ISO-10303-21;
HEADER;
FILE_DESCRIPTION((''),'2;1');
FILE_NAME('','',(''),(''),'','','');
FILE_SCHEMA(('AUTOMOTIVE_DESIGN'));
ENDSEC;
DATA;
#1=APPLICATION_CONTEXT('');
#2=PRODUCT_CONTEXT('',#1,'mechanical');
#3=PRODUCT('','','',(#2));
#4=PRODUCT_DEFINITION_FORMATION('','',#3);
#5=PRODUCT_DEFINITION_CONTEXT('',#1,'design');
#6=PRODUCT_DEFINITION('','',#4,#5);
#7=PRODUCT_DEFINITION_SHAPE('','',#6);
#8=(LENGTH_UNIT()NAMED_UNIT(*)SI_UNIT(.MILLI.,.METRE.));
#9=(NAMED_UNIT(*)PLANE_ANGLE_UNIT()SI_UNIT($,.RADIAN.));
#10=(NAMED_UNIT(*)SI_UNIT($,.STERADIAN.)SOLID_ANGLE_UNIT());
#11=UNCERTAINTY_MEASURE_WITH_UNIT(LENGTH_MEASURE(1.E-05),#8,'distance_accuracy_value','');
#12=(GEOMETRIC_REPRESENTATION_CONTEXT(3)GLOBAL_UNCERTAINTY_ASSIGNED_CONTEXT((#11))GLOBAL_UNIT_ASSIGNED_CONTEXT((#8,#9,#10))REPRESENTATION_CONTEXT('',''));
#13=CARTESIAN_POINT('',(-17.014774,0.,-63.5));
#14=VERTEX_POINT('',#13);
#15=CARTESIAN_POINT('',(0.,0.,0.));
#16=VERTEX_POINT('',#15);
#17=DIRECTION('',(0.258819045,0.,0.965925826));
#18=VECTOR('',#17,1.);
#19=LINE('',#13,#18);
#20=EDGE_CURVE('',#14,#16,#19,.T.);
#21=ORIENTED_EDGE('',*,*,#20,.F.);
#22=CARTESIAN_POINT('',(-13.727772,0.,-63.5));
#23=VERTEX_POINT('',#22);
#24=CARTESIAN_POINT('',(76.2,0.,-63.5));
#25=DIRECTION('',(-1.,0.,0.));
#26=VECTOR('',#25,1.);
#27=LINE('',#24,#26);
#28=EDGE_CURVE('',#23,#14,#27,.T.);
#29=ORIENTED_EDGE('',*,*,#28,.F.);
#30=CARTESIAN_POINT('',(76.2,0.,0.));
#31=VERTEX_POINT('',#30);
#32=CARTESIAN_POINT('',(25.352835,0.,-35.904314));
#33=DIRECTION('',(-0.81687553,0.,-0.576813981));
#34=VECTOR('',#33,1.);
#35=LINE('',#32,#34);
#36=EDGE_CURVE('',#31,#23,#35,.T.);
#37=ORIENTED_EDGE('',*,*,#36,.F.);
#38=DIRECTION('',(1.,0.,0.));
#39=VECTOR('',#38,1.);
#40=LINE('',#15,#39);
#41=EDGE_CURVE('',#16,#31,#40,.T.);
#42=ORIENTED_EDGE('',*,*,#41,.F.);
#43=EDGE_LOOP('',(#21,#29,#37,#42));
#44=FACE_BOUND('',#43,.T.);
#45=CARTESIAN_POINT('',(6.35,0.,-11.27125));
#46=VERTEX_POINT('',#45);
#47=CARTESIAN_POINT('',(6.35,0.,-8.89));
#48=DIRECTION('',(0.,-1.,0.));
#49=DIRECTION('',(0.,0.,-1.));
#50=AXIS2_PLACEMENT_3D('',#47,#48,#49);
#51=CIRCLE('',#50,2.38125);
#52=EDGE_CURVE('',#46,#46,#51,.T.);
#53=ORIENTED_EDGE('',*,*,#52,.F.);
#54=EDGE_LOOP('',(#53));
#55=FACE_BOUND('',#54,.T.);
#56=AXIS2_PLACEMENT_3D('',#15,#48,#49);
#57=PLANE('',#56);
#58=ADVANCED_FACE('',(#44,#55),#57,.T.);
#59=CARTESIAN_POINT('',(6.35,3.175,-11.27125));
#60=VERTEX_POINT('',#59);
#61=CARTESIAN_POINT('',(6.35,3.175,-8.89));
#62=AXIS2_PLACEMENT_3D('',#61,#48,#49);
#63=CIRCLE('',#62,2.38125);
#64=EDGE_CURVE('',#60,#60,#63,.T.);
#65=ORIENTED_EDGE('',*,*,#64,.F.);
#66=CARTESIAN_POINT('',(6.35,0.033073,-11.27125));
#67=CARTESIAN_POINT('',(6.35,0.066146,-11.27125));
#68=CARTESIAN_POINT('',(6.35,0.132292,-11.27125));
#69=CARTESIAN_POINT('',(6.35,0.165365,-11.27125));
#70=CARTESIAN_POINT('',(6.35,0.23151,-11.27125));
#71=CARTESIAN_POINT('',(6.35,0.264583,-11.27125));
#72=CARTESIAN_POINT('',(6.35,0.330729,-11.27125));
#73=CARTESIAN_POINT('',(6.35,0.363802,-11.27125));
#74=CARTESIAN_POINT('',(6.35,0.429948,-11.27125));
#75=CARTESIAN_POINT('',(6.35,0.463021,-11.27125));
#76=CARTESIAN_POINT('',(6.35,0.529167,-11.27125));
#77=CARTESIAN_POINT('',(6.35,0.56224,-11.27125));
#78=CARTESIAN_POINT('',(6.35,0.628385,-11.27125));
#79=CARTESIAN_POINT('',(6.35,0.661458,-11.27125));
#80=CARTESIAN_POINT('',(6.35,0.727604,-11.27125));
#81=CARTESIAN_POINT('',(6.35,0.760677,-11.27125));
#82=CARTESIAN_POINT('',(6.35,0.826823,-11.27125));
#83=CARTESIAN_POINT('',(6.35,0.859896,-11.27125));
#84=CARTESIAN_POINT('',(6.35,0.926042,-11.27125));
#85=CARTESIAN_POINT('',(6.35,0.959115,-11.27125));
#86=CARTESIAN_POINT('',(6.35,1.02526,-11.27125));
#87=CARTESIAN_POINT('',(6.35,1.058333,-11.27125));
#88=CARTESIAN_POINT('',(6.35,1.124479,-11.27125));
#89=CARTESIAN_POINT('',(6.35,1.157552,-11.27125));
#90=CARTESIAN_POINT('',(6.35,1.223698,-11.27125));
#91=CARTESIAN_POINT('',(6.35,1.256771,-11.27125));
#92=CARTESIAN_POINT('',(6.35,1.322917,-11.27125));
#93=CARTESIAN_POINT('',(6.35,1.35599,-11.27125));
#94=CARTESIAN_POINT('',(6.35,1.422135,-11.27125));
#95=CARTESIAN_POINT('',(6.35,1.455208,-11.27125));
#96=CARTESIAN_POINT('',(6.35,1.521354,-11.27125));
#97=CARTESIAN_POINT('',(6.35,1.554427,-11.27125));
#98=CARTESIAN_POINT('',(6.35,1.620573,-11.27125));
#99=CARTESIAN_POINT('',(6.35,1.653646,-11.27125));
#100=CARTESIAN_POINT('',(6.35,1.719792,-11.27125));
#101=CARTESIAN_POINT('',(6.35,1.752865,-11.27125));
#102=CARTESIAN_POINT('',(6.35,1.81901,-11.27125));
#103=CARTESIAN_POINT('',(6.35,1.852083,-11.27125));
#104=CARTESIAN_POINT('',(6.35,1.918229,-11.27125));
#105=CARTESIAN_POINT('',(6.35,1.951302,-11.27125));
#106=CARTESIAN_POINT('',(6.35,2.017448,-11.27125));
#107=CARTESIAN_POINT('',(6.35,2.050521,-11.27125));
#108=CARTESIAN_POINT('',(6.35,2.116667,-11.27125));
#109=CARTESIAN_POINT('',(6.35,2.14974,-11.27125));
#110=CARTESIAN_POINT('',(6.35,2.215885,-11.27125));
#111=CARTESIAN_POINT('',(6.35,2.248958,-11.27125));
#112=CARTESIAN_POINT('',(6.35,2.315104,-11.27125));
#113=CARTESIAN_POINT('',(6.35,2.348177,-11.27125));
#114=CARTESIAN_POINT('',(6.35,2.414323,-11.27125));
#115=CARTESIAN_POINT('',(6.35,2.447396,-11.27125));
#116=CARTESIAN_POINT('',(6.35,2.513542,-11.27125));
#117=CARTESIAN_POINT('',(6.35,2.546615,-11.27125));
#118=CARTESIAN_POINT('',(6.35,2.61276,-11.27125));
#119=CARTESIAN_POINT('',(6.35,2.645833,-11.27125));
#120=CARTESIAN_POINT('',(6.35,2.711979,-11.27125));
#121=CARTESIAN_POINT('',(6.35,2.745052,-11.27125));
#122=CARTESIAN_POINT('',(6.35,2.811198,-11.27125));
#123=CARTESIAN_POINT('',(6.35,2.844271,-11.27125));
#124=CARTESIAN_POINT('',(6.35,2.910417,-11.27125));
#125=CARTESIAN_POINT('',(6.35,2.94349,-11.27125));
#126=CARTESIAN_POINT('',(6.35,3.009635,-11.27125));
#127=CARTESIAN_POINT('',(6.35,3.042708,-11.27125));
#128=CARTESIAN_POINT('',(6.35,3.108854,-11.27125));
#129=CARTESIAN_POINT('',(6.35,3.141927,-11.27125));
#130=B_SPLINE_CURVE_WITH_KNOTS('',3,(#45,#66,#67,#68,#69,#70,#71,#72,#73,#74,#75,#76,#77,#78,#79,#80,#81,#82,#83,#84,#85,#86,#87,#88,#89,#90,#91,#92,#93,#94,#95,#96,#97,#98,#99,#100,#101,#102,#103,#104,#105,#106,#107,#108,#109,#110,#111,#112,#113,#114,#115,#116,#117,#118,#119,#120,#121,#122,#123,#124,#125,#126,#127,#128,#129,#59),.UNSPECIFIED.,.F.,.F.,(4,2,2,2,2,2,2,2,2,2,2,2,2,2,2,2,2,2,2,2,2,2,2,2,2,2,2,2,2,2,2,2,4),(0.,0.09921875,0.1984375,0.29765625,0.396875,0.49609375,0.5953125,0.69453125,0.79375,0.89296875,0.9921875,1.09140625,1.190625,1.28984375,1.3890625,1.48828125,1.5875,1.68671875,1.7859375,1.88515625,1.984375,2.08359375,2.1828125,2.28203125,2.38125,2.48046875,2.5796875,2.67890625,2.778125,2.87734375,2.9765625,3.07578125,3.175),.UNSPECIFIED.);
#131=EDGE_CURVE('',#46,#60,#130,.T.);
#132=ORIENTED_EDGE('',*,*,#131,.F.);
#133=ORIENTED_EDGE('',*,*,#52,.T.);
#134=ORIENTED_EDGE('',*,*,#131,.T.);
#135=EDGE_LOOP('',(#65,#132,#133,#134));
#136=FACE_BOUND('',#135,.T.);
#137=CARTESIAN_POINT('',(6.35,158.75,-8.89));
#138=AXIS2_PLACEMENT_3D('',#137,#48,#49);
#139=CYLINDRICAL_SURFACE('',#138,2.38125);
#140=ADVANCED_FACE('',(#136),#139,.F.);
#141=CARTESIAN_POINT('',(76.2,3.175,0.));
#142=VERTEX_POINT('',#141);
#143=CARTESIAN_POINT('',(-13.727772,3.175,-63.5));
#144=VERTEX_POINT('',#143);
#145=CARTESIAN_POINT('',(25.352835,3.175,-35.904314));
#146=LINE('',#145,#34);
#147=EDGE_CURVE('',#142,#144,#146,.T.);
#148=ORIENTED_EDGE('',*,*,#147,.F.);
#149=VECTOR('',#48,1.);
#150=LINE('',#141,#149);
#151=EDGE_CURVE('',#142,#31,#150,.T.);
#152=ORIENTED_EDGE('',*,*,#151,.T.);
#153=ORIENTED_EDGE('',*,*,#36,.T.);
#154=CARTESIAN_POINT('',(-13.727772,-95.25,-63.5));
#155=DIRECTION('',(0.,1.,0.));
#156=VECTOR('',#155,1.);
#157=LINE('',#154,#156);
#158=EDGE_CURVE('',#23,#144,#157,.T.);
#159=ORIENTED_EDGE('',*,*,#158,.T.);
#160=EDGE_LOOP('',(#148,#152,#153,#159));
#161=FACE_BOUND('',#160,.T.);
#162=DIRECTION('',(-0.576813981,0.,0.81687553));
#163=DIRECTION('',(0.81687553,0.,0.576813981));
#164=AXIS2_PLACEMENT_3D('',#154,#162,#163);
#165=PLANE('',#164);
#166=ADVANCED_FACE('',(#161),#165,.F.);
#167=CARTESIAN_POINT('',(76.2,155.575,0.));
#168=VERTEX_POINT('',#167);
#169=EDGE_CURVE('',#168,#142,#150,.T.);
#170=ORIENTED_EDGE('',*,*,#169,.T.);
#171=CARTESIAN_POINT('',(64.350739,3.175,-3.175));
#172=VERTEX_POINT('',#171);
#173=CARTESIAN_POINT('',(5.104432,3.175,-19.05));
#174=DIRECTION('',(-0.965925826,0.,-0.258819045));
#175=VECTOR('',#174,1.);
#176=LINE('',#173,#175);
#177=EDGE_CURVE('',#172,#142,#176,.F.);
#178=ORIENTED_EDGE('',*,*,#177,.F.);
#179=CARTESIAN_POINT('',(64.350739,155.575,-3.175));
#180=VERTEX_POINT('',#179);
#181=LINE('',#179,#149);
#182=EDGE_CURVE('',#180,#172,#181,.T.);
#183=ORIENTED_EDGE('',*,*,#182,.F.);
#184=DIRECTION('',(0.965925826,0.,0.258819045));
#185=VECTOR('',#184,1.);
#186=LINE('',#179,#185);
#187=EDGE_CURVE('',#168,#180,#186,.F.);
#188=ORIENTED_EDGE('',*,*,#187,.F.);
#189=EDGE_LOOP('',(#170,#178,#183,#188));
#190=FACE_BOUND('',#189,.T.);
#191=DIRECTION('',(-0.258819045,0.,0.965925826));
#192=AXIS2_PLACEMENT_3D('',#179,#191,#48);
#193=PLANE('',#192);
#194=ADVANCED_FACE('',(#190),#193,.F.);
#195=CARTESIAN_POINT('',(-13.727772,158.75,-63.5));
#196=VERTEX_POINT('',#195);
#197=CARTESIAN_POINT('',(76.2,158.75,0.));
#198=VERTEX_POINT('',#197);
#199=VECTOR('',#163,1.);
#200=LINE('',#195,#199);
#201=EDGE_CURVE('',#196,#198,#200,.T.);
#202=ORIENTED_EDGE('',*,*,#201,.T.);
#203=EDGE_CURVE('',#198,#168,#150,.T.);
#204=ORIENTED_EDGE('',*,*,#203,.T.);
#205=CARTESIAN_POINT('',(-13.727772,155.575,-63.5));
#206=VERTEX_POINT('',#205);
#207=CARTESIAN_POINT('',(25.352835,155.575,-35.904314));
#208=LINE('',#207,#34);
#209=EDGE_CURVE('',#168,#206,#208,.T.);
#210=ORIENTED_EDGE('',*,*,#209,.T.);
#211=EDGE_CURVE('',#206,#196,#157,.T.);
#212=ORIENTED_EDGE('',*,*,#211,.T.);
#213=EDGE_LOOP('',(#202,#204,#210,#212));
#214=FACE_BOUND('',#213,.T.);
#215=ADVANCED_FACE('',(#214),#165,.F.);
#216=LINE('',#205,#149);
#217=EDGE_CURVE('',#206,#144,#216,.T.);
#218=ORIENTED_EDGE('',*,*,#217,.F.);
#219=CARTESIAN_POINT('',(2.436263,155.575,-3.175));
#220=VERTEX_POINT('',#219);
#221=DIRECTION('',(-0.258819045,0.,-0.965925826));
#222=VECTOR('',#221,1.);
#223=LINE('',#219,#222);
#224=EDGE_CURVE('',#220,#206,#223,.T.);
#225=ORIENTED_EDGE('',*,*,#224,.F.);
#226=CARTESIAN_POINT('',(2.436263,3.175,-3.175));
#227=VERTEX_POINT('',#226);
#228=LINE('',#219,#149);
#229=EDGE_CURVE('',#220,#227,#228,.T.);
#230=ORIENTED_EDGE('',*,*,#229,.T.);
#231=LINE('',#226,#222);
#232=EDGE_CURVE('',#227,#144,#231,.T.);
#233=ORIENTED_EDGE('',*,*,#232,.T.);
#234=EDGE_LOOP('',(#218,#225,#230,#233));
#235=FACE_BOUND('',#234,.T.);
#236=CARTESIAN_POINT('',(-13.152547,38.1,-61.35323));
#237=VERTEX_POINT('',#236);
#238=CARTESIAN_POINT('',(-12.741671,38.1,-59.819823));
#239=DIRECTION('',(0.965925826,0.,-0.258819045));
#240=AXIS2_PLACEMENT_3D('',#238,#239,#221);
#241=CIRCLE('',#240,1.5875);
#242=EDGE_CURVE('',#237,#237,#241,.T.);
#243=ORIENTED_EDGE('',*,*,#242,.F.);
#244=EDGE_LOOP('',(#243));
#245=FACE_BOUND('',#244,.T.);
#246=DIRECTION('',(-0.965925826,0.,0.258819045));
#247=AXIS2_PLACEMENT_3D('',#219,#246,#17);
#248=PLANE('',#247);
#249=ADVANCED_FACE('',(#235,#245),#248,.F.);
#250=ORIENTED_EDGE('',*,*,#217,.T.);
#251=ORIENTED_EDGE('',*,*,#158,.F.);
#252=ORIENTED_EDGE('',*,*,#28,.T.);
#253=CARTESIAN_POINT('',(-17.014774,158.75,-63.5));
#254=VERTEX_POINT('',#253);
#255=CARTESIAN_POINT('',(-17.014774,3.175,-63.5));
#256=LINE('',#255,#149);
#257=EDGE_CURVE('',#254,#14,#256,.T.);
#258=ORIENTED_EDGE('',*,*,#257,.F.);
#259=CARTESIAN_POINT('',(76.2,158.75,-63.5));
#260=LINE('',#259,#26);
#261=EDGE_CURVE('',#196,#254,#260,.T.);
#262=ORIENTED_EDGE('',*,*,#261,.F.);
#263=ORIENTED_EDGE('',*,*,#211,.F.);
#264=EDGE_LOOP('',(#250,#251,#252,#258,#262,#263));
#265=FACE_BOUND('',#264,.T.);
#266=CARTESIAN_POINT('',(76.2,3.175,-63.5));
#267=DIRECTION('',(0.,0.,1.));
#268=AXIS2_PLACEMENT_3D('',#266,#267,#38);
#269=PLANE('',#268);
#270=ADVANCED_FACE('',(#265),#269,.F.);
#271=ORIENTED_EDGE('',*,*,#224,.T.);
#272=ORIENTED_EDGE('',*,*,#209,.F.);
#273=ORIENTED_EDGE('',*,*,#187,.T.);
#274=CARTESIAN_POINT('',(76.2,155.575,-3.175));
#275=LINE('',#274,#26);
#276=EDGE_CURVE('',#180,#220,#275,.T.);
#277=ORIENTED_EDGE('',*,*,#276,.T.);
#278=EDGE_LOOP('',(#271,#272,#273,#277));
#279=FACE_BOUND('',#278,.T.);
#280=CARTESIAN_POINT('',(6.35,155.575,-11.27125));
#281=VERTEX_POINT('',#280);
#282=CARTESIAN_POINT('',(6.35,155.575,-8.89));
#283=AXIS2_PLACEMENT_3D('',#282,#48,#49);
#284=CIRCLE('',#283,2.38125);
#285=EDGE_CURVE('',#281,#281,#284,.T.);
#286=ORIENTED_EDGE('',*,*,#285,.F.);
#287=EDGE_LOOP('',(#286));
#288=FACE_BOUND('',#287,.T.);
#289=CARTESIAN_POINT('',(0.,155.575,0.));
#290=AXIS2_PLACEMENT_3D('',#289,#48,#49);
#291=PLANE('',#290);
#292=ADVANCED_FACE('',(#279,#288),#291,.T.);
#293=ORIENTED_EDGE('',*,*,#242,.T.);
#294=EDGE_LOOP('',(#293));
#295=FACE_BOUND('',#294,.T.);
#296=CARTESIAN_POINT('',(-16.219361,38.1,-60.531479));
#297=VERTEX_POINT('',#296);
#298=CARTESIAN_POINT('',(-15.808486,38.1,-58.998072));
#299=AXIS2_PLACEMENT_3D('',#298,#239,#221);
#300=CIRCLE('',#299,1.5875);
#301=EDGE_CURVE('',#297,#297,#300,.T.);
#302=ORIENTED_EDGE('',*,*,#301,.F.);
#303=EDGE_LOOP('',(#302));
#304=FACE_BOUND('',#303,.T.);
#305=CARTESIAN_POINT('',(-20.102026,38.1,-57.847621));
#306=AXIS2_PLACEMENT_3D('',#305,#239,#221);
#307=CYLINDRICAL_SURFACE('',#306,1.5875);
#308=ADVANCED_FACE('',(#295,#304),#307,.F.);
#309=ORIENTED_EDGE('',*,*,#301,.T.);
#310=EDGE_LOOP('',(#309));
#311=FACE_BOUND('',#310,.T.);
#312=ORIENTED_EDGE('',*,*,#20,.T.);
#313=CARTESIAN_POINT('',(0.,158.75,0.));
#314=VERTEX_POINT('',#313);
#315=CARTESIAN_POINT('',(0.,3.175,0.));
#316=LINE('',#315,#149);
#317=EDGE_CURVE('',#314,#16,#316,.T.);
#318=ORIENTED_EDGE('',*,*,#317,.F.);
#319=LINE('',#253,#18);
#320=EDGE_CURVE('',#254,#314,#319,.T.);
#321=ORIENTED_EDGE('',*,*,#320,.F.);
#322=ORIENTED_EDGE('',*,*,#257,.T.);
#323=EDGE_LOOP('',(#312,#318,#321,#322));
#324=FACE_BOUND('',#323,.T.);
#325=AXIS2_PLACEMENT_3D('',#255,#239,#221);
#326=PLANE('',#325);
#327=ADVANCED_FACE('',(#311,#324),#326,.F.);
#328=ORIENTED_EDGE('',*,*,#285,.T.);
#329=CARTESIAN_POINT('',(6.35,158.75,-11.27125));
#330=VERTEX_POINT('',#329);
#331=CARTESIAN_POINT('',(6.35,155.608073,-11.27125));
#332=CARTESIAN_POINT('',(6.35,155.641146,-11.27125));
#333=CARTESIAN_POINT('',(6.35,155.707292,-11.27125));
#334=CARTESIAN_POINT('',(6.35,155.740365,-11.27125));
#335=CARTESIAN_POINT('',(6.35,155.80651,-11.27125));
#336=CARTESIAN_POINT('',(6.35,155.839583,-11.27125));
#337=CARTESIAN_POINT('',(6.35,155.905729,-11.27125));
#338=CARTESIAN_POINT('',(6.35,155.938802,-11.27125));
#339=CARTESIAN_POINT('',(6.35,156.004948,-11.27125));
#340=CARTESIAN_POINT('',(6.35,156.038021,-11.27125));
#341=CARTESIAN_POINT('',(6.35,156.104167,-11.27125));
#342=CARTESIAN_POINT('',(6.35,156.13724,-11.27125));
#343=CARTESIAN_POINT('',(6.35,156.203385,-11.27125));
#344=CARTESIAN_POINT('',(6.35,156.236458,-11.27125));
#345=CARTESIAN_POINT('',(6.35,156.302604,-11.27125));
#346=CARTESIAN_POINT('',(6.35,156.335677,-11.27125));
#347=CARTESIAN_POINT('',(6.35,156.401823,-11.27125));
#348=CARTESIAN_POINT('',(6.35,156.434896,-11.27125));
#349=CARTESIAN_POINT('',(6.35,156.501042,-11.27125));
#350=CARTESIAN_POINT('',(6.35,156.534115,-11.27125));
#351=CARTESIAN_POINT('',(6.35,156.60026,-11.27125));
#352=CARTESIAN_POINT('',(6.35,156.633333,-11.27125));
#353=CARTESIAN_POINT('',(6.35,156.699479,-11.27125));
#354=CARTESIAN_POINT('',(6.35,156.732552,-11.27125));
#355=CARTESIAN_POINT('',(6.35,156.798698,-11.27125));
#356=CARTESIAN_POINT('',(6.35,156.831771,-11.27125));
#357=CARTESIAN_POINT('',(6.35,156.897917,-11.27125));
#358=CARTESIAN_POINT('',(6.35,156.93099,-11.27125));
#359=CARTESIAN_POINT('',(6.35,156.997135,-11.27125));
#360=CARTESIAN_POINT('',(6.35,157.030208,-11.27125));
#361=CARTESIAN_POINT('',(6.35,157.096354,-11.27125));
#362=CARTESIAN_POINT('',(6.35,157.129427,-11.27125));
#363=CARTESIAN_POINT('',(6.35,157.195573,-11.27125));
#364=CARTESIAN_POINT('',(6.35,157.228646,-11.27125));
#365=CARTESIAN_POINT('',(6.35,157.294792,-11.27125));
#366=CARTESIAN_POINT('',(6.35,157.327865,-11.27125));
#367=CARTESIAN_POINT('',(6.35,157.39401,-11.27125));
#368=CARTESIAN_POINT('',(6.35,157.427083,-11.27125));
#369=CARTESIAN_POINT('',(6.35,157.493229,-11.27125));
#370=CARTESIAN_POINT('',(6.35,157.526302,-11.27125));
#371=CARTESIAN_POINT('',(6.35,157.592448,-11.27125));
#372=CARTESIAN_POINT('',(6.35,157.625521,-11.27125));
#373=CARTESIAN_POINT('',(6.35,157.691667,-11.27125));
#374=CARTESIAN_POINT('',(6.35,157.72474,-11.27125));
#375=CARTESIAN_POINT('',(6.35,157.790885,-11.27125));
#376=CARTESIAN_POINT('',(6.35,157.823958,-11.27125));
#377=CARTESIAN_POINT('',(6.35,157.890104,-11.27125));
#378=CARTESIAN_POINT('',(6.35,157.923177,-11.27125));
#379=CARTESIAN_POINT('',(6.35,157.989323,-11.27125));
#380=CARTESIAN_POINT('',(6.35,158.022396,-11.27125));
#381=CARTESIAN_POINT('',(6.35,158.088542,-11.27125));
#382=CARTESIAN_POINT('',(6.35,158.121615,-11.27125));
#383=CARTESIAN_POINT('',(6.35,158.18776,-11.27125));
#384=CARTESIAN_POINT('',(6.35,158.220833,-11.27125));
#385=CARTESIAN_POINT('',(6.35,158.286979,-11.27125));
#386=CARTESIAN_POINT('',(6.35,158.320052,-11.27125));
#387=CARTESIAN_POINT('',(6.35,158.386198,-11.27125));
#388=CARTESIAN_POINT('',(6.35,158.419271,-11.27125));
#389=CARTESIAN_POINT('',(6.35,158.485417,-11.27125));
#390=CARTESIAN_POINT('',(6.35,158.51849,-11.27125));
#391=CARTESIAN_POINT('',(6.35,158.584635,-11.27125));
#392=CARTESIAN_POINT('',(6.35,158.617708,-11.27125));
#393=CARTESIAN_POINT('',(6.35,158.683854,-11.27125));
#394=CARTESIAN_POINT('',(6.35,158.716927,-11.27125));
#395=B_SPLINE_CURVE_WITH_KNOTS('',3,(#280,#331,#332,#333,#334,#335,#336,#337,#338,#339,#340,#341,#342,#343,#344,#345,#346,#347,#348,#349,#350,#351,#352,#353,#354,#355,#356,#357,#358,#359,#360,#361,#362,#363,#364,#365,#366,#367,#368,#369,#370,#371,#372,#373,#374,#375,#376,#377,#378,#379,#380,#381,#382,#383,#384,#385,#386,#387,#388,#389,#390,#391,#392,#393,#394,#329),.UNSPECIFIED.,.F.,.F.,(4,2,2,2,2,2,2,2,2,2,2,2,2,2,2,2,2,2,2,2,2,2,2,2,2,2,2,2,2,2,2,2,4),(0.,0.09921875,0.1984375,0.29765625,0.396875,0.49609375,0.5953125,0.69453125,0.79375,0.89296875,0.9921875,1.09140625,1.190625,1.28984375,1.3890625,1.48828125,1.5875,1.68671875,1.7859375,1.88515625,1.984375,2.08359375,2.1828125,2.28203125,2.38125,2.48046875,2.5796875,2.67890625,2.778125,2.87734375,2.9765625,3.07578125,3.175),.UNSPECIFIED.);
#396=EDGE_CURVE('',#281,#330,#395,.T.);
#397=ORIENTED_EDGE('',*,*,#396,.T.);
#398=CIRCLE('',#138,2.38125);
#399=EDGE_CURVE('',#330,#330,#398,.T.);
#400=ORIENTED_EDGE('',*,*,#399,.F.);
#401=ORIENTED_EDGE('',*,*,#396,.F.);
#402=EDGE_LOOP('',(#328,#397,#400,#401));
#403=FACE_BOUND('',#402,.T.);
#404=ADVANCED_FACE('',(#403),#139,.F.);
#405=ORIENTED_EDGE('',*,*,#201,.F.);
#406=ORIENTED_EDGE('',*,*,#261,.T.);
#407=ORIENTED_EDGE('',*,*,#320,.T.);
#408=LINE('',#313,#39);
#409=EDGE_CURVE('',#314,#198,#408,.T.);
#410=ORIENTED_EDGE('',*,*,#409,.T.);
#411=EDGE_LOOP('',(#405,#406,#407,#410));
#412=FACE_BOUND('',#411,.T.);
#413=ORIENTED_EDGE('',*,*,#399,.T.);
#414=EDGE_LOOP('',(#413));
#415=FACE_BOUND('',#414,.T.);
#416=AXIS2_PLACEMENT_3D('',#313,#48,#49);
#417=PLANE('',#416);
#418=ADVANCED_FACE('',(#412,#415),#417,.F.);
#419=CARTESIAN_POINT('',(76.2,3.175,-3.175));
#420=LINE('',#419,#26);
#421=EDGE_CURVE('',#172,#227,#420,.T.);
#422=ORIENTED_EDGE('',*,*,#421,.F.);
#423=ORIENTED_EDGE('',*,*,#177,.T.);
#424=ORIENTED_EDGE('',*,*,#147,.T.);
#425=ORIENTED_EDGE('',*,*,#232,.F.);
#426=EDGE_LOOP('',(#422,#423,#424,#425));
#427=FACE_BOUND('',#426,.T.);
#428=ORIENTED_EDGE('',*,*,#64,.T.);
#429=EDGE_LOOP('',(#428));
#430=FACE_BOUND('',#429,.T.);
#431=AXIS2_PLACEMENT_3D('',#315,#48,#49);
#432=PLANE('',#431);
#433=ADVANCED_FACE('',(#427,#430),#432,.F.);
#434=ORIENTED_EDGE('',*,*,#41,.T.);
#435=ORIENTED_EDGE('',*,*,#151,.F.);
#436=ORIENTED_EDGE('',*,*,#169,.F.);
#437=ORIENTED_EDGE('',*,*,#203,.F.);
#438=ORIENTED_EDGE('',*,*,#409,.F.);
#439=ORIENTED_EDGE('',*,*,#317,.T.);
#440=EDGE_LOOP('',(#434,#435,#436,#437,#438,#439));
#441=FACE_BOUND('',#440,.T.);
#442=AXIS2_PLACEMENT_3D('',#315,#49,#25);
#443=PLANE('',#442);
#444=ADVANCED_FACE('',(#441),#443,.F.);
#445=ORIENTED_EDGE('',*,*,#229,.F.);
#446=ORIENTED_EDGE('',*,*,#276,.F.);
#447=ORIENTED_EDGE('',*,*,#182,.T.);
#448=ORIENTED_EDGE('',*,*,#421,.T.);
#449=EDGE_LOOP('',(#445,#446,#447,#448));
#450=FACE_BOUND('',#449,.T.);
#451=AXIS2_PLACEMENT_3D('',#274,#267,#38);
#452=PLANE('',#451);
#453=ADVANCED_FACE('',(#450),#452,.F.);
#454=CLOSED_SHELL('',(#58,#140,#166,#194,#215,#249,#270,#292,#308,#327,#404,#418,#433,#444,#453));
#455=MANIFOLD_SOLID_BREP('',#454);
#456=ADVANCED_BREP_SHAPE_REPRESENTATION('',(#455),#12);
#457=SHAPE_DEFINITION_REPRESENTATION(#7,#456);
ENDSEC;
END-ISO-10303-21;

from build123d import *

# Parameters (mm, degrees)
BOSS_EXTRUDE1_DEPTH = 3.175
BOSS_EXTRUDE3_DEPTH = 152.4
BOSS_EXTRUDE4_DEPTH = 3.175
CHAMFER1_SIZE2      = 3.175
CHAMFER1_SIZE       = 11.849261314
SKETCH4_R           = 2.38125
CUT_EXTRUDE1_DEPTH  = 158.75
CUT_EXTRUDE2_DEPTH  = 254
SKETCH7_R           = 1.5875
CUT_EXTRUDE3_DEPTH  = 7.62


with BuildPart() as part:
    # Sketch1 → Boss-Extrude1 (new body)
    with BuildSketch(Plane(origin=(0, 0, 0), x_dir=(1, 0, 0), z_dir=(0, 1, 0))):
        Polygon((0, 0), (76.2, 0), (76.2, 63.5), (-17.014773719, 63.5), align=None)
    extrude(amount=BOSS_EXTRUDE1_DEPTH)

    # Sketch2 → Boss-Extrude3 (add)
    with BuildSketch(Plane(origin=(0, 3.175, 0), x_dir=(1, 0, 0), z_dir=(0, 1, 0))):
        Polygon((76.2, 0), (0, 0), (-17.014773719, 63.5), (-13.727771847, 63.5), (2.436263187, 3.175), (76.2, 3.175), align=None)
    extrude(amount=BOSS_EXTRUDE3_DEPTH)

    # Sketch3 → Boss-Extrude4 (add)
    with BuildSketch(Plane(origin=(0, 155.575, 0), x_dir=(1, 0, 0), z_dir=(0, 1, 0))):
        Polygon((-17.014773719, 63.5), (0, 0), (76.2, 0), (76.2, 63.5), align=None)
    extrude(amount=BOSS_EXTRUDE4_DEPTH)

    # Chamfer1
    chamfer1_edges = [part.edges().sort_by_distance(p)[0] for p in [
        (76.2, 79.375, -3.175),
    ]]
    chamfer1_side = [part.faces().sort_by_distance(p)[0] for p in [
        (76.1365, 79.375, -3.175),
    ]]
    chamfer(chamfer1_edges, length=CHAMFER1_SIZE - 0.0001, length2=CHAMFER1_SIZE2 - 0.0001, reference=chamfer1_side[0])  # a hair under: the kernel refuses the full size

    # Sketch4 → Cut-Extrude1 (cut)
    with BuildSketch(Plane.XZ):
        with Locations(Location((6.35, -8.89, 0), (0, 0, 270))):
            Circle(SKETCH4_R)
    extrude(amount=-CUT_EXTRUDE1_DEPTH, mode=Mode.SUBTRACT)

    # Sketch6 → Cut-Extrude2 (cut)
    with BuildSketch(Plane(origin=(0, 158.75, 0), x_dir=(1, 0, 0), z_dir=(0, 1, 0))):
        Polygon((-13.727771847, 63.5), (76.2, 0), (76.2, 63.5), align=None)
    extrude(amount=-CUT_EXTRUDE2_DEPTH, mode=Mode.SUBTRACT)

    # Sketch7 → Cut-Extrude3 (cut)
    with BuildSketch(Plane(origin=(3.066814498, 0, -0.821750468), x_dir=(-0.25881904510251846, 0, -0.965925826289069), z_dir=(0.965925826289069, 0, -0.25881904510251846))):
        with Locations((61.07929877, 38.1)):
            Circle(SKETCH7_R)
    extrude(amount=-CUT_EXTRUDE3_DEPTH, mode=Mode.SUBTRACT)


solid = part.part
